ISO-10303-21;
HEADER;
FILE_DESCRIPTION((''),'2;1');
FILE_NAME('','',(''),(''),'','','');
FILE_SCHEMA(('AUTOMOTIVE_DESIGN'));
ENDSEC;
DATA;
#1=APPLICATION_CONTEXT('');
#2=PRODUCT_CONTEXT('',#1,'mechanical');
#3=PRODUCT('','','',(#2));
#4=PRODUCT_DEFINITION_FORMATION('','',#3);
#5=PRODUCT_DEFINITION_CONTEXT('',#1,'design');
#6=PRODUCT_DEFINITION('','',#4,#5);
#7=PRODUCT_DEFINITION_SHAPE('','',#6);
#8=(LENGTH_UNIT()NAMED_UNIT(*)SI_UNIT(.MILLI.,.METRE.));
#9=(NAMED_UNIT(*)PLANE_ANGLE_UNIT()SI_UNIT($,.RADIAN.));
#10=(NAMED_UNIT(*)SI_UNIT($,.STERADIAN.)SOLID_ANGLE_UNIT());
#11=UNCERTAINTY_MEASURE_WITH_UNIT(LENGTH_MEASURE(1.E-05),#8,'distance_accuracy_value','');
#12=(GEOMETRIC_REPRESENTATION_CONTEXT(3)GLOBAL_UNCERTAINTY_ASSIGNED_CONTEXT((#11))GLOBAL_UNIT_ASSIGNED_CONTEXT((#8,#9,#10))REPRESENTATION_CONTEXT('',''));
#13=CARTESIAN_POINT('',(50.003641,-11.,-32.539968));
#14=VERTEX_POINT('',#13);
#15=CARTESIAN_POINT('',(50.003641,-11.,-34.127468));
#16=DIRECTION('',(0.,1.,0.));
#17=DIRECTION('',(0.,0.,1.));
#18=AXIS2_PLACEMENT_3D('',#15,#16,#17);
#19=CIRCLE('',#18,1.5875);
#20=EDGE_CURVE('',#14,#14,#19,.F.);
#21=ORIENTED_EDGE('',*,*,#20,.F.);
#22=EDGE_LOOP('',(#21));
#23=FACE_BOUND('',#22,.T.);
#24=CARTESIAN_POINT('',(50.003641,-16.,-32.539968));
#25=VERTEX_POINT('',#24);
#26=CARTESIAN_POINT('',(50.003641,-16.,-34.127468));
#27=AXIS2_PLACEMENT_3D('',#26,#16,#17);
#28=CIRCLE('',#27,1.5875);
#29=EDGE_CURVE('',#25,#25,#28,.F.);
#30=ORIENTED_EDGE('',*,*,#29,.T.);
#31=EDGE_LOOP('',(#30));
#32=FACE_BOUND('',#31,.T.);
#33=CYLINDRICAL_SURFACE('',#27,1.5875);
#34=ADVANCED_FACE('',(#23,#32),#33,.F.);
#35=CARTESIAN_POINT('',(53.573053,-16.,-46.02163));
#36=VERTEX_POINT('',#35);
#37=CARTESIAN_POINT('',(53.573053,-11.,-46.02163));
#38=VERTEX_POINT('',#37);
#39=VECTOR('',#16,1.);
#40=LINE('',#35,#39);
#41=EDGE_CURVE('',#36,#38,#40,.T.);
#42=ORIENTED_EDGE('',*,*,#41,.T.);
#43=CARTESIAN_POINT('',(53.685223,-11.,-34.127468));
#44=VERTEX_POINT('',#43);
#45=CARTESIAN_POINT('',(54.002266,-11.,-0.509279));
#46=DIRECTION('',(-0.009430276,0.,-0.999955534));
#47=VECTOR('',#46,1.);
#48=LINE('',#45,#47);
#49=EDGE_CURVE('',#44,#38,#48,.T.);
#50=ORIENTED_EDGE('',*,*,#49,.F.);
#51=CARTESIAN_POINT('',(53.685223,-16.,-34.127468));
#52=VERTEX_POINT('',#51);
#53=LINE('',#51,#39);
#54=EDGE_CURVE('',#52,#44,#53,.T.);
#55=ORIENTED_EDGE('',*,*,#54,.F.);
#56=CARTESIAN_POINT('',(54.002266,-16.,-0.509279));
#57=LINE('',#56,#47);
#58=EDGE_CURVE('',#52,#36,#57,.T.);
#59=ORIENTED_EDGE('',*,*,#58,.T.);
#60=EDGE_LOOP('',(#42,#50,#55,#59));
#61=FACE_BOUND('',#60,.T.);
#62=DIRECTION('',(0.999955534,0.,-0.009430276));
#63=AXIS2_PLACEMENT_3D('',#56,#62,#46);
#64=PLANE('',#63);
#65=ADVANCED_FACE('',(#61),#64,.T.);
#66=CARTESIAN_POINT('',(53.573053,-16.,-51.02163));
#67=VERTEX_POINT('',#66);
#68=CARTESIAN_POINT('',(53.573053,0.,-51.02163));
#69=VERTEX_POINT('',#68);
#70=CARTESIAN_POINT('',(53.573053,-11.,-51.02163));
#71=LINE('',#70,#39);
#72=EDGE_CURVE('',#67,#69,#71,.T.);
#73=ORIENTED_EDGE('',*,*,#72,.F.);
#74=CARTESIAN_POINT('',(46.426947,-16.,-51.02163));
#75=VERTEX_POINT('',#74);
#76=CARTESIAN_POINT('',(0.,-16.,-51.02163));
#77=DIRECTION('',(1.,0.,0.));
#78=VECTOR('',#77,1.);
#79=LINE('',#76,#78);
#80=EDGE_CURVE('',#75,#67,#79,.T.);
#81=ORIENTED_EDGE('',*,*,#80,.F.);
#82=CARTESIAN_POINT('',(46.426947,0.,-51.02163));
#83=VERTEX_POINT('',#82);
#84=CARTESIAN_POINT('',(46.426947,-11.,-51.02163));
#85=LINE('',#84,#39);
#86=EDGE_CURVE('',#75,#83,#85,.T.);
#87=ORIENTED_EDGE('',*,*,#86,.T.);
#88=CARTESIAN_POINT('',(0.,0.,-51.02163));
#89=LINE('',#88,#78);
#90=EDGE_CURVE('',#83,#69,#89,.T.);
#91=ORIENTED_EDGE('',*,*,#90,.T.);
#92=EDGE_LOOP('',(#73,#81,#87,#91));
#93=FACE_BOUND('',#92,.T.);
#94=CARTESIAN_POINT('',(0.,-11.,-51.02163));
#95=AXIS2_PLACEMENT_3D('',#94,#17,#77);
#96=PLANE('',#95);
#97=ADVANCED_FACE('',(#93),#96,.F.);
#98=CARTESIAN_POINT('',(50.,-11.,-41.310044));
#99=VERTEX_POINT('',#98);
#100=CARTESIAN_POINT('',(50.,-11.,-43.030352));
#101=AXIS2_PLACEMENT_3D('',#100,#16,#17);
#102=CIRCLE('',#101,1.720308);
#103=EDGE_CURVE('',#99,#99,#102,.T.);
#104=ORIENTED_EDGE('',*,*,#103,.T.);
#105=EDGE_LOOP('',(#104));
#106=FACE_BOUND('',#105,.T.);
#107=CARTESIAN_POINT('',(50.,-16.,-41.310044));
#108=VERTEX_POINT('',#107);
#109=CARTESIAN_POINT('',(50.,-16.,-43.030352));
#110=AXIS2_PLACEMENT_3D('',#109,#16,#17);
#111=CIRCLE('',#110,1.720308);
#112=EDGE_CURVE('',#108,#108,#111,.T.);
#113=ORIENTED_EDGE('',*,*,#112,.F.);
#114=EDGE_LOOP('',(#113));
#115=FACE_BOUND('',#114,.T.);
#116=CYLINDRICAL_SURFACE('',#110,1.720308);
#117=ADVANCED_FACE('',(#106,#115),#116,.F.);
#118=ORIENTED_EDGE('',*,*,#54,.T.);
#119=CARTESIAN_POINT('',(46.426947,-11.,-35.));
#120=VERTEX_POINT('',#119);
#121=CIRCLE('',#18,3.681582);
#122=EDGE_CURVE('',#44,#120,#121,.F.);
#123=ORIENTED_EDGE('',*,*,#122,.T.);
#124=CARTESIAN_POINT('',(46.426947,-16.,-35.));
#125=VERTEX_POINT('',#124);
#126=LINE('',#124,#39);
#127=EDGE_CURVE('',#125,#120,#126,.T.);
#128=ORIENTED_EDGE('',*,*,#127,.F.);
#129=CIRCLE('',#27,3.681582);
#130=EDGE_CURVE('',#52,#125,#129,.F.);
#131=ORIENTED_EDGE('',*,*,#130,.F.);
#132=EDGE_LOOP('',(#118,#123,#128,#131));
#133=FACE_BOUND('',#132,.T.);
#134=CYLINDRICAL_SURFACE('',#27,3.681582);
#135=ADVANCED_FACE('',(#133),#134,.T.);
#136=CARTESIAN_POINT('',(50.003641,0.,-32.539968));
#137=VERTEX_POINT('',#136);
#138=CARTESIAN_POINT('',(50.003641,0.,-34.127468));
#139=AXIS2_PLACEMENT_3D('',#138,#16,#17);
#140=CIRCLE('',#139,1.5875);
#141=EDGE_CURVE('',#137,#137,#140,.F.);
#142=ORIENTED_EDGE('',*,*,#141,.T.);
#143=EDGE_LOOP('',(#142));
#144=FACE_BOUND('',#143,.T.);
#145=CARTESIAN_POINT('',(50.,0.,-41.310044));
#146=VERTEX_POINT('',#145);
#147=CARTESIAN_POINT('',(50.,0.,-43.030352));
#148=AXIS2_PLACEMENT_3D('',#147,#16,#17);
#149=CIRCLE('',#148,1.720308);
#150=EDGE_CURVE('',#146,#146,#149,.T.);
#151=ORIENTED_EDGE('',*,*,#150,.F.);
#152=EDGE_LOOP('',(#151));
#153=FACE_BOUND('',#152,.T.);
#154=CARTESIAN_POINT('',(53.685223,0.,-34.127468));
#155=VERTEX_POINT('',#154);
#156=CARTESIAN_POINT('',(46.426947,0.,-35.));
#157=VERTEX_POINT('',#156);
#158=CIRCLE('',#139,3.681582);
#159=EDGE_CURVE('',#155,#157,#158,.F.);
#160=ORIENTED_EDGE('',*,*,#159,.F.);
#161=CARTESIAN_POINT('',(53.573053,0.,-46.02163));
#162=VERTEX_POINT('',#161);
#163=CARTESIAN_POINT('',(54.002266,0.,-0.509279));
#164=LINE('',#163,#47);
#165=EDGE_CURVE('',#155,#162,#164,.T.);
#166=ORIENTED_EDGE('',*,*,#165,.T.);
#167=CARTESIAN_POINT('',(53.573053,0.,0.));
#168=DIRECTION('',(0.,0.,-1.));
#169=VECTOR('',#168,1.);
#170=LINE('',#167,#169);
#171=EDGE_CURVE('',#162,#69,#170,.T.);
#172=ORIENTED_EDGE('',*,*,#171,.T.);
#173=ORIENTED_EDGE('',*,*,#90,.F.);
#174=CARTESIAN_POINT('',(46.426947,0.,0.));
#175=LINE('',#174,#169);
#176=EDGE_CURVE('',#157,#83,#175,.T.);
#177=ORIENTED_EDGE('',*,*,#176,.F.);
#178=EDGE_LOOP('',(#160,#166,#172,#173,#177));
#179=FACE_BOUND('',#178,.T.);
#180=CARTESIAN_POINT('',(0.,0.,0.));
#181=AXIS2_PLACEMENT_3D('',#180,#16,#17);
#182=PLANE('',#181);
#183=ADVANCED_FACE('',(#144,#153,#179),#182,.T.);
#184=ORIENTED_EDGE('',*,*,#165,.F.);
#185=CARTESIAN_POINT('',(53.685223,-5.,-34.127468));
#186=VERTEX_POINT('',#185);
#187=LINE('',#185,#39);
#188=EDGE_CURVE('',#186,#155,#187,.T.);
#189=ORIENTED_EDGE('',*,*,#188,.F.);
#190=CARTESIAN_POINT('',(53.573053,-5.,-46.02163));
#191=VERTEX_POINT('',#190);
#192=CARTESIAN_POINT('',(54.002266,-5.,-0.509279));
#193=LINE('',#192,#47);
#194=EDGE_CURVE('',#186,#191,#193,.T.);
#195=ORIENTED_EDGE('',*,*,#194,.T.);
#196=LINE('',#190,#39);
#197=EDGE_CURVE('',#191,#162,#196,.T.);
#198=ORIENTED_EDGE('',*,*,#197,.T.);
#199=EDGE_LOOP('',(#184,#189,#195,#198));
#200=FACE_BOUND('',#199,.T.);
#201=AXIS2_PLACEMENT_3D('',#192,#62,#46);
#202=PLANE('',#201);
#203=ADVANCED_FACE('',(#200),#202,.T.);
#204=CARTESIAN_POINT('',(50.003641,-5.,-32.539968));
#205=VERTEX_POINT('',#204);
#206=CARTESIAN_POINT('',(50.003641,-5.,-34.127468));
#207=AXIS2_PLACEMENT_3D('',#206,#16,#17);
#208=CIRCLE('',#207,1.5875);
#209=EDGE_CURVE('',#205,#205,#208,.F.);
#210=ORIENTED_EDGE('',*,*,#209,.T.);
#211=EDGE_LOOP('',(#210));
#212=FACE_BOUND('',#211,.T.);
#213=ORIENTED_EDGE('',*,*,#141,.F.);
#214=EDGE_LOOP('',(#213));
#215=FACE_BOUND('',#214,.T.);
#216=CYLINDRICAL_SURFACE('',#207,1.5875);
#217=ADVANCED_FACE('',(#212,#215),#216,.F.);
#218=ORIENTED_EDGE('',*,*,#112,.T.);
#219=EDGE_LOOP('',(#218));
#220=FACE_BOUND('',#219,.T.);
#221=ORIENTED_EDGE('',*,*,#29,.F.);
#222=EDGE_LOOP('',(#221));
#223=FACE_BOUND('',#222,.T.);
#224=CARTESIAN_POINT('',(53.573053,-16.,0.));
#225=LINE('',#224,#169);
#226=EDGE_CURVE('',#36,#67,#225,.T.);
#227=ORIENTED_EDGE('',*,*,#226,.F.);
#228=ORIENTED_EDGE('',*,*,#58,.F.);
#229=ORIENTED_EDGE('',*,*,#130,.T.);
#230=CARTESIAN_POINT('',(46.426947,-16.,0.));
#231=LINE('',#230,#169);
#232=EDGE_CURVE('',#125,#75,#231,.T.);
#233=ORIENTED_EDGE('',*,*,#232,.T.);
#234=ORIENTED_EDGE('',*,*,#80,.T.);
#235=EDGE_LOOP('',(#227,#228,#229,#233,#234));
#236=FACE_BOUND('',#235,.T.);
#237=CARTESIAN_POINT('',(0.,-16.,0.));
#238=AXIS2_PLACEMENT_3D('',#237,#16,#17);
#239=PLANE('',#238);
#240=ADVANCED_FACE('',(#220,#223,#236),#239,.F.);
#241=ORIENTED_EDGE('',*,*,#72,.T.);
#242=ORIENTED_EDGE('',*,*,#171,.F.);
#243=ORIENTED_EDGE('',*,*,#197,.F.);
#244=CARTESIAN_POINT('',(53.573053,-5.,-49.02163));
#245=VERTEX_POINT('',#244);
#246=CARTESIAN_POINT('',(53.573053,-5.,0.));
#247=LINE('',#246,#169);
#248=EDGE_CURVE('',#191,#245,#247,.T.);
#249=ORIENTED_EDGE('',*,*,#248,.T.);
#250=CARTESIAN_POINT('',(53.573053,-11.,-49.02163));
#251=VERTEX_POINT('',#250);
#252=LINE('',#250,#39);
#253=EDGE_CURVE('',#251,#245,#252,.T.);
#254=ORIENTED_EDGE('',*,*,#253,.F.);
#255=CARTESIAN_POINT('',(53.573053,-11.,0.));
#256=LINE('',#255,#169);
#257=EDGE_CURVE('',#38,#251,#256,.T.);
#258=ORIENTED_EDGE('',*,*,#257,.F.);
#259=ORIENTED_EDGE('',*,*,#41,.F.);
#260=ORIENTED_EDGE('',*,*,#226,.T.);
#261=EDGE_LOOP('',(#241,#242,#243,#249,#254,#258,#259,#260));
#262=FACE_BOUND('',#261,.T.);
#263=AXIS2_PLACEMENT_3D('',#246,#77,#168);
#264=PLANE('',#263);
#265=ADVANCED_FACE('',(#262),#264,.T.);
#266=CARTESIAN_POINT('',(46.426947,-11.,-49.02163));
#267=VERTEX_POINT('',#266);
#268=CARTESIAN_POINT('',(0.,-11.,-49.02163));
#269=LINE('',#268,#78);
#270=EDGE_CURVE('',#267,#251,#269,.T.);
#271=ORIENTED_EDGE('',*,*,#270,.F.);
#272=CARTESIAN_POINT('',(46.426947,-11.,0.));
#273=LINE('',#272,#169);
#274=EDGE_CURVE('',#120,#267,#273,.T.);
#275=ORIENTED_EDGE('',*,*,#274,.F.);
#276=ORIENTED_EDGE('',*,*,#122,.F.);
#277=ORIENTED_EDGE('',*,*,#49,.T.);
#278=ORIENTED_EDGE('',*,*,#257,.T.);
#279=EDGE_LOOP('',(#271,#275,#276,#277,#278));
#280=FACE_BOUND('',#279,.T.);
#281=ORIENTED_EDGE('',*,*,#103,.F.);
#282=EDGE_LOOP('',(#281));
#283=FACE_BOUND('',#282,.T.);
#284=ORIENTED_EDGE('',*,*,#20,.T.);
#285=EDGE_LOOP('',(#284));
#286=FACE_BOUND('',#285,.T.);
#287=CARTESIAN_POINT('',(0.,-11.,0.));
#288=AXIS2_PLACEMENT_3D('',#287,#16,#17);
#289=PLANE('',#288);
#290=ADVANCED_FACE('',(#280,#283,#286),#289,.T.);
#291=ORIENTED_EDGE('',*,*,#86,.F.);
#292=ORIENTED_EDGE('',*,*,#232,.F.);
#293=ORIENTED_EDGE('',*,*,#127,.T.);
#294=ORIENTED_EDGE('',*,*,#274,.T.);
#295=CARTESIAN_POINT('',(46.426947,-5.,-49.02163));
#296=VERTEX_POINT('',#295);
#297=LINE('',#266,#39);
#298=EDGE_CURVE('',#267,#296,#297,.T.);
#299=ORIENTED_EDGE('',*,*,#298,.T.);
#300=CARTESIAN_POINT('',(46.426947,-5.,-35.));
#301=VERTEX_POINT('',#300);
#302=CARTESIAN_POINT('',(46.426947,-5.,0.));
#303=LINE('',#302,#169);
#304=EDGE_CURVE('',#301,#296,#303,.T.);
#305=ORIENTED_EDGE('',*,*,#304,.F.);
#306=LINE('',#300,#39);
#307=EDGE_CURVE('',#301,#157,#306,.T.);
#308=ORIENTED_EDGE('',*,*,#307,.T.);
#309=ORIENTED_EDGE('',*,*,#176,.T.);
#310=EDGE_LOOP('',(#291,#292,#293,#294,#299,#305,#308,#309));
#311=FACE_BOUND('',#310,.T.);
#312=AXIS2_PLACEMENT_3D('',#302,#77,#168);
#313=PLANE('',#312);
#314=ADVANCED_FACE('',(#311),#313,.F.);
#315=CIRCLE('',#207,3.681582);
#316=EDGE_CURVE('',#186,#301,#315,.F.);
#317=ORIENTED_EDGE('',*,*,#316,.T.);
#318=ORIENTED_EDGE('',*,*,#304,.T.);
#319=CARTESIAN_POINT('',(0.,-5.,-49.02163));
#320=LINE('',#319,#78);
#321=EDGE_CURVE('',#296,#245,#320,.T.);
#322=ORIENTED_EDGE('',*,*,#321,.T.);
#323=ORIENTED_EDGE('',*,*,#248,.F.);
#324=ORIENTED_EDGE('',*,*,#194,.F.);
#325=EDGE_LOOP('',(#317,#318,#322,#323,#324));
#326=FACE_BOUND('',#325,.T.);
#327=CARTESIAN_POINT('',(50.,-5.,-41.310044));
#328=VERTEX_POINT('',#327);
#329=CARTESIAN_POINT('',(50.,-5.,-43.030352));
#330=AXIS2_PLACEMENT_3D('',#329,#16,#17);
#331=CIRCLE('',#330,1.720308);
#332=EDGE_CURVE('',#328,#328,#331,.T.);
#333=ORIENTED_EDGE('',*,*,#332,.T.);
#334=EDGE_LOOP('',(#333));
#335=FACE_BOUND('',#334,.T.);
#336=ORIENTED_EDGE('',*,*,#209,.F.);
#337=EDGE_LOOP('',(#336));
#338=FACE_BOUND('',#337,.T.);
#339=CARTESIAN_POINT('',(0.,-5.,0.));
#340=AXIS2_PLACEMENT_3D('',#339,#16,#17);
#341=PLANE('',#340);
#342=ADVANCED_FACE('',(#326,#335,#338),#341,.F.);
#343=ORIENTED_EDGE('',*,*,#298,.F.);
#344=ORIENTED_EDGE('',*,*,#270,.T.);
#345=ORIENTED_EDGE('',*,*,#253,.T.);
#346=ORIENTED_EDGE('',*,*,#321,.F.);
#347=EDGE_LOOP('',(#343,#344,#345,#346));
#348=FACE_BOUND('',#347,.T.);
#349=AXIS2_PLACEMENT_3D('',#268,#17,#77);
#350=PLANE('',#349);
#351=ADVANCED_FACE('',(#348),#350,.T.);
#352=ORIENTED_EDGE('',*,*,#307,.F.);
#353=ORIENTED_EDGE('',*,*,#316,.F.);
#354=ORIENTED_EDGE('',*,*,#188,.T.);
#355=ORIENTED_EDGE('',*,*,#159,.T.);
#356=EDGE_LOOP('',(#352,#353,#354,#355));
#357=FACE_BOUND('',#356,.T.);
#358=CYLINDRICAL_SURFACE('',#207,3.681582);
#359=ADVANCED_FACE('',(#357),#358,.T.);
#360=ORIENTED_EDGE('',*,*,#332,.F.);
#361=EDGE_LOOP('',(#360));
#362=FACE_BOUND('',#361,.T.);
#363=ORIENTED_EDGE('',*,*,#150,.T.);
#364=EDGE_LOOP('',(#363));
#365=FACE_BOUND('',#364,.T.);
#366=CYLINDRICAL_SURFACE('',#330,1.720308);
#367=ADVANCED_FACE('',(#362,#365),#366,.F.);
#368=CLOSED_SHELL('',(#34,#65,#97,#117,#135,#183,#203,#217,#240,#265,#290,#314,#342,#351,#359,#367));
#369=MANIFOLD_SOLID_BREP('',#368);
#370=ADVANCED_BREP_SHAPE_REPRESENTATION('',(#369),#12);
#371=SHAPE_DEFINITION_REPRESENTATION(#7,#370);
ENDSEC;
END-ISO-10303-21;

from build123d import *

# Parameters (mm, degrees)
CROQUIS2_R              = 1.720307827
CROQUIS2_R_2            = 1.5875
SALIENTE_EXTRUIR1_DEPTH = 5
CROQUIS2_4_W            = 7.146105916
CROQUIS2_4_H            = 2
SALIENTE_EXTRUIR2_DEPTH = 11
SALIENTE_EXTRUIR3_START = -11
CROQUIS2_5_R            = 1.720307827
CROQUIS2_5_R_2          = 1.5875
SALIENTE_EXTRUIR3_DEPTH = 5


with BuildPart() as part:
    # Croquis2 → Saliente-Extruir1 (new body)
    with BuildSketch(Plane(origin=(0, 0, 0), x_dir=(1, 0, 0), z_dir=(0, 1, 0))):
        with BuildLine():
            ThreePointArc((46.426947042, 35), (49.564233927, 30.472202028), (53.685223181, 34.127468235))
            Line((53.685223181, 34.127468235), (53.573052958, 46.021630377))
            Line((53.573052958, 46.021630377), (53.573052958, 49.021630377))
            Line((53.573052958, 49.021630377), (46.426947042, 49.021630377))
            Line((46.426947042, 49.021630377), (46.426947042, 35))
        make_face()
        with Locations((50, 43.030352088)):
            Circle(CROQUIS2_R, mode=Mode.SUBTRACT)
        with Locations((50.003640725, 34.127468235)):
            Circle(CROQUIS2_R_2, mode=Mode.SUBTRACT)
    extrude(amount=-SALIENTE_EXTRUIR1_DEPTH)

    # Croquis2<4> → Saliente-Extruir2 (add)
    with BuildSketch(Plane(origin=(0, 0, 0), x_dir=(1, 0, 0), z_dir=(0, 1, 0))):
        with Locations((50, 50.021630377)):
            Rectangle(CROQUIS2_4_W, CROQUIS2_4_H)
    extrude(amount=-SALIENTE_EXTRUIR2_DEPTH)

    # Croquis2<5> → Saliente-Extruir3 (add)
    with BuildSketch(Plane(origin=(0, 0, 0), x_dir=(1, 0, 0), z_dir=(0, 1, 0)).offset(SALIENTE_EXTRUIR3_START)):
        with BuildLine():
            ThreePointArc((46.426947042, 35), (49.564233927, 30.472202028), (53.685223181, 34.127468235))
            Line((53.685223181, 34.127468235), (53.573052958, 46.021630377))
            Line((53.573052958, 46.021630377), (53.573052958, 51.021630377))
            Line((53.573052958, 51.021630377), (46.426947042, 51.021630377))
            Line((46.426947042, 51.021630377), (46.426947042, 35))
        make_face()
        with Locations((50, 43.030352088)):
            Circle(CROQUIS2_5_R, mode=Mode.SUBTRACT)
        with Locations((50.003640725, 34.127468235)):
            Circle(CROQUIS2_5_R_2, mode=Mode.SUBTRACT)
    extrude(amount=-SALIENTE_EXTRUIR3_DEPTH)


solid = part.part
